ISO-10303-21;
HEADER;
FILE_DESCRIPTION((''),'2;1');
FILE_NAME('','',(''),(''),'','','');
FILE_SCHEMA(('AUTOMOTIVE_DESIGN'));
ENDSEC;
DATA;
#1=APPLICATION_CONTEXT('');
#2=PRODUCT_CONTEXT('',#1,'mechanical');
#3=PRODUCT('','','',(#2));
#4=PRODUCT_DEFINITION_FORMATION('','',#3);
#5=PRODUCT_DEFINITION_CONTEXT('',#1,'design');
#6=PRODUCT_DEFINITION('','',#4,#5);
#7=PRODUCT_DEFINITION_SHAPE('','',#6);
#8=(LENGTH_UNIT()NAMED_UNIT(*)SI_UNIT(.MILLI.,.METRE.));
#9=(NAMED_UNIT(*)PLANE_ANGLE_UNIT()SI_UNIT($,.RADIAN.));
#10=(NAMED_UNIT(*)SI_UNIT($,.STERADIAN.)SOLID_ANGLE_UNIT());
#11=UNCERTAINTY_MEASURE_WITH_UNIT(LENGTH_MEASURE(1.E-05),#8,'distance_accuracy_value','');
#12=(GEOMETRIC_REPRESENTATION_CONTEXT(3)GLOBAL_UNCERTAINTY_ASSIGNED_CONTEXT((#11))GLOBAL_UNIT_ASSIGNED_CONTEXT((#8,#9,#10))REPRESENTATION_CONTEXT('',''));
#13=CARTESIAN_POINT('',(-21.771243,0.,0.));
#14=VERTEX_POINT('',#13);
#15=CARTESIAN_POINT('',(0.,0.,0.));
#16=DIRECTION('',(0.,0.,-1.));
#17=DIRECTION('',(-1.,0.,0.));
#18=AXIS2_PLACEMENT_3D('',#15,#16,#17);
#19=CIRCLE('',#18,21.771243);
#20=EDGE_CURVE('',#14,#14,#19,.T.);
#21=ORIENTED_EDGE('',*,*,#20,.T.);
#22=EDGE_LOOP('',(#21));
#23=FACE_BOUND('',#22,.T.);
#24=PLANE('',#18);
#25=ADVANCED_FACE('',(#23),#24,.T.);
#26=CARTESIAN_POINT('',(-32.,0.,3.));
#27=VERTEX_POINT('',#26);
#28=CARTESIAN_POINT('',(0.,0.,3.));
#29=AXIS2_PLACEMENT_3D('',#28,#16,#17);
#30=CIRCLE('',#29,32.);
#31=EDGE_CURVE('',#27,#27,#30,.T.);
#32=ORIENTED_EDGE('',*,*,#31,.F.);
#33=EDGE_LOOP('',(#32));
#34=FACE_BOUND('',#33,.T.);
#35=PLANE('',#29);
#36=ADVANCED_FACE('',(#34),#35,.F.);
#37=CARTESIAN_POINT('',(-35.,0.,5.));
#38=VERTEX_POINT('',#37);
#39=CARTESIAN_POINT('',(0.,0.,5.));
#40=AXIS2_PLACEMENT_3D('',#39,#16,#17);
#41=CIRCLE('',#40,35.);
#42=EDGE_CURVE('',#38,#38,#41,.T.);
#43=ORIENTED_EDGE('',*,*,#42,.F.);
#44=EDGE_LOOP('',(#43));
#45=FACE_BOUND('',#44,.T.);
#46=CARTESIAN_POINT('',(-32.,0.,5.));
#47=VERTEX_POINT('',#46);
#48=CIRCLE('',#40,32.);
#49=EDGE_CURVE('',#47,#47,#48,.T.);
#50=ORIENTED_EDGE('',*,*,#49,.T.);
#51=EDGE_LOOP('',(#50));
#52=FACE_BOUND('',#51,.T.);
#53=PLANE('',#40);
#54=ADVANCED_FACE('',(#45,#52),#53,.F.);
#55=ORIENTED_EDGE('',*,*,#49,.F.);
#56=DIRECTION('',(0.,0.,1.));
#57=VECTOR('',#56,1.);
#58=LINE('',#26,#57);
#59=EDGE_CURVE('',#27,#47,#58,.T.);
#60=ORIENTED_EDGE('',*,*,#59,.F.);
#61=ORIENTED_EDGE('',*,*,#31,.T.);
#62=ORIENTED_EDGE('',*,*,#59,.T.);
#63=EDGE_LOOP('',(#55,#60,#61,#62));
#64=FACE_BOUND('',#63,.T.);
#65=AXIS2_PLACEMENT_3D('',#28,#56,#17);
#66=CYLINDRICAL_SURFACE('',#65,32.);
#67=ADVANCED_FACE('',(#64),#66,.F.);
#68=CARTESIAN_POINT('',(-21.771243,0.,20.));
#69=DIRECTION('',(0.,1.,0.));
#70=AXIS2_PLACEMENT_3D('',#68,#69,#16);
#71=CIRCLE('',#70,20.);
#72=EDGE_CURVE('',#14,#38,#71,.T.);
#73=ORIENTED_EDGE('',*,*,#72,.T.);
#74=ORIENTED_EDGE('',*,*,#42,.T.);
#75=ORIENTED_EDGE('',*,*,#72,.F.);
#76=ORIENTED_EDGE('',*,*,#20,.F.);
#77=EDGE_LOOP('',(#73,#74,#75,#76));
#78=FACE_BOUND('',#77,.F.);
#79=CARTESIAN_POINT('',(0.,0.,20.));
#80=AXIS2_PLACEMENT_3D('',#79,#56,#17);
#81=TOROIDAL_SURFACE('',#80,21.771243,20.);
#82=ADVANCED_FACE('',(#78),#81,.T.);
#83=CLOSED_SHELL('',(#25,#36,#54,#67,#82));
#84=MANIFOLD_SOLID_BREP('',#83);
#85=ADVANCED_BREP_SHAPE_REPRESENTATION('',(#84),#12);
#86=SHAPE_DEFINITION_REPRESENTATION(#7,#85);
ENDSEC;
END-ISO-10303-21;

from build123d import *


# Not quite as in the source:
# - a fillet or chamfer that OpenCascade refuses, or shapes differently, is made with other operations: its cross-section is extruded or revolved along the edge and cut away or added


with BuildPart() as f1:
    # F0 (on Front) → F1 (revolve)
    with BuildSketch(Plane.XZ):
        Polygon((-35, 0), (0, 0), (0, 3), (-32, 3), (-32, 5), (-35, 5), align=None)
    revolve(axis=Axis((0, 0, 1.5), (0, 0, -1)))

    # F2: fillet of radius 20 on 1 edges, made by hand

    # F2_s1 → F2_t2 (revolve, cut)
    with BuildSketch(Plane.XZ):
        with BuildLine():
            ThreePointArc((-21.7712434447, 0), (-28.8423112565, 1.2917130661), (-35, 5))
            Line((-35, 5), (-35, 0))
            Line((-35, 0), (-21.7712434447, 0))
        make_face()
    revolve(axis=Axis((0, 0, 0), (0, 0, -1)), mode=Mode.SUBTRACT)


solid = f1.part
